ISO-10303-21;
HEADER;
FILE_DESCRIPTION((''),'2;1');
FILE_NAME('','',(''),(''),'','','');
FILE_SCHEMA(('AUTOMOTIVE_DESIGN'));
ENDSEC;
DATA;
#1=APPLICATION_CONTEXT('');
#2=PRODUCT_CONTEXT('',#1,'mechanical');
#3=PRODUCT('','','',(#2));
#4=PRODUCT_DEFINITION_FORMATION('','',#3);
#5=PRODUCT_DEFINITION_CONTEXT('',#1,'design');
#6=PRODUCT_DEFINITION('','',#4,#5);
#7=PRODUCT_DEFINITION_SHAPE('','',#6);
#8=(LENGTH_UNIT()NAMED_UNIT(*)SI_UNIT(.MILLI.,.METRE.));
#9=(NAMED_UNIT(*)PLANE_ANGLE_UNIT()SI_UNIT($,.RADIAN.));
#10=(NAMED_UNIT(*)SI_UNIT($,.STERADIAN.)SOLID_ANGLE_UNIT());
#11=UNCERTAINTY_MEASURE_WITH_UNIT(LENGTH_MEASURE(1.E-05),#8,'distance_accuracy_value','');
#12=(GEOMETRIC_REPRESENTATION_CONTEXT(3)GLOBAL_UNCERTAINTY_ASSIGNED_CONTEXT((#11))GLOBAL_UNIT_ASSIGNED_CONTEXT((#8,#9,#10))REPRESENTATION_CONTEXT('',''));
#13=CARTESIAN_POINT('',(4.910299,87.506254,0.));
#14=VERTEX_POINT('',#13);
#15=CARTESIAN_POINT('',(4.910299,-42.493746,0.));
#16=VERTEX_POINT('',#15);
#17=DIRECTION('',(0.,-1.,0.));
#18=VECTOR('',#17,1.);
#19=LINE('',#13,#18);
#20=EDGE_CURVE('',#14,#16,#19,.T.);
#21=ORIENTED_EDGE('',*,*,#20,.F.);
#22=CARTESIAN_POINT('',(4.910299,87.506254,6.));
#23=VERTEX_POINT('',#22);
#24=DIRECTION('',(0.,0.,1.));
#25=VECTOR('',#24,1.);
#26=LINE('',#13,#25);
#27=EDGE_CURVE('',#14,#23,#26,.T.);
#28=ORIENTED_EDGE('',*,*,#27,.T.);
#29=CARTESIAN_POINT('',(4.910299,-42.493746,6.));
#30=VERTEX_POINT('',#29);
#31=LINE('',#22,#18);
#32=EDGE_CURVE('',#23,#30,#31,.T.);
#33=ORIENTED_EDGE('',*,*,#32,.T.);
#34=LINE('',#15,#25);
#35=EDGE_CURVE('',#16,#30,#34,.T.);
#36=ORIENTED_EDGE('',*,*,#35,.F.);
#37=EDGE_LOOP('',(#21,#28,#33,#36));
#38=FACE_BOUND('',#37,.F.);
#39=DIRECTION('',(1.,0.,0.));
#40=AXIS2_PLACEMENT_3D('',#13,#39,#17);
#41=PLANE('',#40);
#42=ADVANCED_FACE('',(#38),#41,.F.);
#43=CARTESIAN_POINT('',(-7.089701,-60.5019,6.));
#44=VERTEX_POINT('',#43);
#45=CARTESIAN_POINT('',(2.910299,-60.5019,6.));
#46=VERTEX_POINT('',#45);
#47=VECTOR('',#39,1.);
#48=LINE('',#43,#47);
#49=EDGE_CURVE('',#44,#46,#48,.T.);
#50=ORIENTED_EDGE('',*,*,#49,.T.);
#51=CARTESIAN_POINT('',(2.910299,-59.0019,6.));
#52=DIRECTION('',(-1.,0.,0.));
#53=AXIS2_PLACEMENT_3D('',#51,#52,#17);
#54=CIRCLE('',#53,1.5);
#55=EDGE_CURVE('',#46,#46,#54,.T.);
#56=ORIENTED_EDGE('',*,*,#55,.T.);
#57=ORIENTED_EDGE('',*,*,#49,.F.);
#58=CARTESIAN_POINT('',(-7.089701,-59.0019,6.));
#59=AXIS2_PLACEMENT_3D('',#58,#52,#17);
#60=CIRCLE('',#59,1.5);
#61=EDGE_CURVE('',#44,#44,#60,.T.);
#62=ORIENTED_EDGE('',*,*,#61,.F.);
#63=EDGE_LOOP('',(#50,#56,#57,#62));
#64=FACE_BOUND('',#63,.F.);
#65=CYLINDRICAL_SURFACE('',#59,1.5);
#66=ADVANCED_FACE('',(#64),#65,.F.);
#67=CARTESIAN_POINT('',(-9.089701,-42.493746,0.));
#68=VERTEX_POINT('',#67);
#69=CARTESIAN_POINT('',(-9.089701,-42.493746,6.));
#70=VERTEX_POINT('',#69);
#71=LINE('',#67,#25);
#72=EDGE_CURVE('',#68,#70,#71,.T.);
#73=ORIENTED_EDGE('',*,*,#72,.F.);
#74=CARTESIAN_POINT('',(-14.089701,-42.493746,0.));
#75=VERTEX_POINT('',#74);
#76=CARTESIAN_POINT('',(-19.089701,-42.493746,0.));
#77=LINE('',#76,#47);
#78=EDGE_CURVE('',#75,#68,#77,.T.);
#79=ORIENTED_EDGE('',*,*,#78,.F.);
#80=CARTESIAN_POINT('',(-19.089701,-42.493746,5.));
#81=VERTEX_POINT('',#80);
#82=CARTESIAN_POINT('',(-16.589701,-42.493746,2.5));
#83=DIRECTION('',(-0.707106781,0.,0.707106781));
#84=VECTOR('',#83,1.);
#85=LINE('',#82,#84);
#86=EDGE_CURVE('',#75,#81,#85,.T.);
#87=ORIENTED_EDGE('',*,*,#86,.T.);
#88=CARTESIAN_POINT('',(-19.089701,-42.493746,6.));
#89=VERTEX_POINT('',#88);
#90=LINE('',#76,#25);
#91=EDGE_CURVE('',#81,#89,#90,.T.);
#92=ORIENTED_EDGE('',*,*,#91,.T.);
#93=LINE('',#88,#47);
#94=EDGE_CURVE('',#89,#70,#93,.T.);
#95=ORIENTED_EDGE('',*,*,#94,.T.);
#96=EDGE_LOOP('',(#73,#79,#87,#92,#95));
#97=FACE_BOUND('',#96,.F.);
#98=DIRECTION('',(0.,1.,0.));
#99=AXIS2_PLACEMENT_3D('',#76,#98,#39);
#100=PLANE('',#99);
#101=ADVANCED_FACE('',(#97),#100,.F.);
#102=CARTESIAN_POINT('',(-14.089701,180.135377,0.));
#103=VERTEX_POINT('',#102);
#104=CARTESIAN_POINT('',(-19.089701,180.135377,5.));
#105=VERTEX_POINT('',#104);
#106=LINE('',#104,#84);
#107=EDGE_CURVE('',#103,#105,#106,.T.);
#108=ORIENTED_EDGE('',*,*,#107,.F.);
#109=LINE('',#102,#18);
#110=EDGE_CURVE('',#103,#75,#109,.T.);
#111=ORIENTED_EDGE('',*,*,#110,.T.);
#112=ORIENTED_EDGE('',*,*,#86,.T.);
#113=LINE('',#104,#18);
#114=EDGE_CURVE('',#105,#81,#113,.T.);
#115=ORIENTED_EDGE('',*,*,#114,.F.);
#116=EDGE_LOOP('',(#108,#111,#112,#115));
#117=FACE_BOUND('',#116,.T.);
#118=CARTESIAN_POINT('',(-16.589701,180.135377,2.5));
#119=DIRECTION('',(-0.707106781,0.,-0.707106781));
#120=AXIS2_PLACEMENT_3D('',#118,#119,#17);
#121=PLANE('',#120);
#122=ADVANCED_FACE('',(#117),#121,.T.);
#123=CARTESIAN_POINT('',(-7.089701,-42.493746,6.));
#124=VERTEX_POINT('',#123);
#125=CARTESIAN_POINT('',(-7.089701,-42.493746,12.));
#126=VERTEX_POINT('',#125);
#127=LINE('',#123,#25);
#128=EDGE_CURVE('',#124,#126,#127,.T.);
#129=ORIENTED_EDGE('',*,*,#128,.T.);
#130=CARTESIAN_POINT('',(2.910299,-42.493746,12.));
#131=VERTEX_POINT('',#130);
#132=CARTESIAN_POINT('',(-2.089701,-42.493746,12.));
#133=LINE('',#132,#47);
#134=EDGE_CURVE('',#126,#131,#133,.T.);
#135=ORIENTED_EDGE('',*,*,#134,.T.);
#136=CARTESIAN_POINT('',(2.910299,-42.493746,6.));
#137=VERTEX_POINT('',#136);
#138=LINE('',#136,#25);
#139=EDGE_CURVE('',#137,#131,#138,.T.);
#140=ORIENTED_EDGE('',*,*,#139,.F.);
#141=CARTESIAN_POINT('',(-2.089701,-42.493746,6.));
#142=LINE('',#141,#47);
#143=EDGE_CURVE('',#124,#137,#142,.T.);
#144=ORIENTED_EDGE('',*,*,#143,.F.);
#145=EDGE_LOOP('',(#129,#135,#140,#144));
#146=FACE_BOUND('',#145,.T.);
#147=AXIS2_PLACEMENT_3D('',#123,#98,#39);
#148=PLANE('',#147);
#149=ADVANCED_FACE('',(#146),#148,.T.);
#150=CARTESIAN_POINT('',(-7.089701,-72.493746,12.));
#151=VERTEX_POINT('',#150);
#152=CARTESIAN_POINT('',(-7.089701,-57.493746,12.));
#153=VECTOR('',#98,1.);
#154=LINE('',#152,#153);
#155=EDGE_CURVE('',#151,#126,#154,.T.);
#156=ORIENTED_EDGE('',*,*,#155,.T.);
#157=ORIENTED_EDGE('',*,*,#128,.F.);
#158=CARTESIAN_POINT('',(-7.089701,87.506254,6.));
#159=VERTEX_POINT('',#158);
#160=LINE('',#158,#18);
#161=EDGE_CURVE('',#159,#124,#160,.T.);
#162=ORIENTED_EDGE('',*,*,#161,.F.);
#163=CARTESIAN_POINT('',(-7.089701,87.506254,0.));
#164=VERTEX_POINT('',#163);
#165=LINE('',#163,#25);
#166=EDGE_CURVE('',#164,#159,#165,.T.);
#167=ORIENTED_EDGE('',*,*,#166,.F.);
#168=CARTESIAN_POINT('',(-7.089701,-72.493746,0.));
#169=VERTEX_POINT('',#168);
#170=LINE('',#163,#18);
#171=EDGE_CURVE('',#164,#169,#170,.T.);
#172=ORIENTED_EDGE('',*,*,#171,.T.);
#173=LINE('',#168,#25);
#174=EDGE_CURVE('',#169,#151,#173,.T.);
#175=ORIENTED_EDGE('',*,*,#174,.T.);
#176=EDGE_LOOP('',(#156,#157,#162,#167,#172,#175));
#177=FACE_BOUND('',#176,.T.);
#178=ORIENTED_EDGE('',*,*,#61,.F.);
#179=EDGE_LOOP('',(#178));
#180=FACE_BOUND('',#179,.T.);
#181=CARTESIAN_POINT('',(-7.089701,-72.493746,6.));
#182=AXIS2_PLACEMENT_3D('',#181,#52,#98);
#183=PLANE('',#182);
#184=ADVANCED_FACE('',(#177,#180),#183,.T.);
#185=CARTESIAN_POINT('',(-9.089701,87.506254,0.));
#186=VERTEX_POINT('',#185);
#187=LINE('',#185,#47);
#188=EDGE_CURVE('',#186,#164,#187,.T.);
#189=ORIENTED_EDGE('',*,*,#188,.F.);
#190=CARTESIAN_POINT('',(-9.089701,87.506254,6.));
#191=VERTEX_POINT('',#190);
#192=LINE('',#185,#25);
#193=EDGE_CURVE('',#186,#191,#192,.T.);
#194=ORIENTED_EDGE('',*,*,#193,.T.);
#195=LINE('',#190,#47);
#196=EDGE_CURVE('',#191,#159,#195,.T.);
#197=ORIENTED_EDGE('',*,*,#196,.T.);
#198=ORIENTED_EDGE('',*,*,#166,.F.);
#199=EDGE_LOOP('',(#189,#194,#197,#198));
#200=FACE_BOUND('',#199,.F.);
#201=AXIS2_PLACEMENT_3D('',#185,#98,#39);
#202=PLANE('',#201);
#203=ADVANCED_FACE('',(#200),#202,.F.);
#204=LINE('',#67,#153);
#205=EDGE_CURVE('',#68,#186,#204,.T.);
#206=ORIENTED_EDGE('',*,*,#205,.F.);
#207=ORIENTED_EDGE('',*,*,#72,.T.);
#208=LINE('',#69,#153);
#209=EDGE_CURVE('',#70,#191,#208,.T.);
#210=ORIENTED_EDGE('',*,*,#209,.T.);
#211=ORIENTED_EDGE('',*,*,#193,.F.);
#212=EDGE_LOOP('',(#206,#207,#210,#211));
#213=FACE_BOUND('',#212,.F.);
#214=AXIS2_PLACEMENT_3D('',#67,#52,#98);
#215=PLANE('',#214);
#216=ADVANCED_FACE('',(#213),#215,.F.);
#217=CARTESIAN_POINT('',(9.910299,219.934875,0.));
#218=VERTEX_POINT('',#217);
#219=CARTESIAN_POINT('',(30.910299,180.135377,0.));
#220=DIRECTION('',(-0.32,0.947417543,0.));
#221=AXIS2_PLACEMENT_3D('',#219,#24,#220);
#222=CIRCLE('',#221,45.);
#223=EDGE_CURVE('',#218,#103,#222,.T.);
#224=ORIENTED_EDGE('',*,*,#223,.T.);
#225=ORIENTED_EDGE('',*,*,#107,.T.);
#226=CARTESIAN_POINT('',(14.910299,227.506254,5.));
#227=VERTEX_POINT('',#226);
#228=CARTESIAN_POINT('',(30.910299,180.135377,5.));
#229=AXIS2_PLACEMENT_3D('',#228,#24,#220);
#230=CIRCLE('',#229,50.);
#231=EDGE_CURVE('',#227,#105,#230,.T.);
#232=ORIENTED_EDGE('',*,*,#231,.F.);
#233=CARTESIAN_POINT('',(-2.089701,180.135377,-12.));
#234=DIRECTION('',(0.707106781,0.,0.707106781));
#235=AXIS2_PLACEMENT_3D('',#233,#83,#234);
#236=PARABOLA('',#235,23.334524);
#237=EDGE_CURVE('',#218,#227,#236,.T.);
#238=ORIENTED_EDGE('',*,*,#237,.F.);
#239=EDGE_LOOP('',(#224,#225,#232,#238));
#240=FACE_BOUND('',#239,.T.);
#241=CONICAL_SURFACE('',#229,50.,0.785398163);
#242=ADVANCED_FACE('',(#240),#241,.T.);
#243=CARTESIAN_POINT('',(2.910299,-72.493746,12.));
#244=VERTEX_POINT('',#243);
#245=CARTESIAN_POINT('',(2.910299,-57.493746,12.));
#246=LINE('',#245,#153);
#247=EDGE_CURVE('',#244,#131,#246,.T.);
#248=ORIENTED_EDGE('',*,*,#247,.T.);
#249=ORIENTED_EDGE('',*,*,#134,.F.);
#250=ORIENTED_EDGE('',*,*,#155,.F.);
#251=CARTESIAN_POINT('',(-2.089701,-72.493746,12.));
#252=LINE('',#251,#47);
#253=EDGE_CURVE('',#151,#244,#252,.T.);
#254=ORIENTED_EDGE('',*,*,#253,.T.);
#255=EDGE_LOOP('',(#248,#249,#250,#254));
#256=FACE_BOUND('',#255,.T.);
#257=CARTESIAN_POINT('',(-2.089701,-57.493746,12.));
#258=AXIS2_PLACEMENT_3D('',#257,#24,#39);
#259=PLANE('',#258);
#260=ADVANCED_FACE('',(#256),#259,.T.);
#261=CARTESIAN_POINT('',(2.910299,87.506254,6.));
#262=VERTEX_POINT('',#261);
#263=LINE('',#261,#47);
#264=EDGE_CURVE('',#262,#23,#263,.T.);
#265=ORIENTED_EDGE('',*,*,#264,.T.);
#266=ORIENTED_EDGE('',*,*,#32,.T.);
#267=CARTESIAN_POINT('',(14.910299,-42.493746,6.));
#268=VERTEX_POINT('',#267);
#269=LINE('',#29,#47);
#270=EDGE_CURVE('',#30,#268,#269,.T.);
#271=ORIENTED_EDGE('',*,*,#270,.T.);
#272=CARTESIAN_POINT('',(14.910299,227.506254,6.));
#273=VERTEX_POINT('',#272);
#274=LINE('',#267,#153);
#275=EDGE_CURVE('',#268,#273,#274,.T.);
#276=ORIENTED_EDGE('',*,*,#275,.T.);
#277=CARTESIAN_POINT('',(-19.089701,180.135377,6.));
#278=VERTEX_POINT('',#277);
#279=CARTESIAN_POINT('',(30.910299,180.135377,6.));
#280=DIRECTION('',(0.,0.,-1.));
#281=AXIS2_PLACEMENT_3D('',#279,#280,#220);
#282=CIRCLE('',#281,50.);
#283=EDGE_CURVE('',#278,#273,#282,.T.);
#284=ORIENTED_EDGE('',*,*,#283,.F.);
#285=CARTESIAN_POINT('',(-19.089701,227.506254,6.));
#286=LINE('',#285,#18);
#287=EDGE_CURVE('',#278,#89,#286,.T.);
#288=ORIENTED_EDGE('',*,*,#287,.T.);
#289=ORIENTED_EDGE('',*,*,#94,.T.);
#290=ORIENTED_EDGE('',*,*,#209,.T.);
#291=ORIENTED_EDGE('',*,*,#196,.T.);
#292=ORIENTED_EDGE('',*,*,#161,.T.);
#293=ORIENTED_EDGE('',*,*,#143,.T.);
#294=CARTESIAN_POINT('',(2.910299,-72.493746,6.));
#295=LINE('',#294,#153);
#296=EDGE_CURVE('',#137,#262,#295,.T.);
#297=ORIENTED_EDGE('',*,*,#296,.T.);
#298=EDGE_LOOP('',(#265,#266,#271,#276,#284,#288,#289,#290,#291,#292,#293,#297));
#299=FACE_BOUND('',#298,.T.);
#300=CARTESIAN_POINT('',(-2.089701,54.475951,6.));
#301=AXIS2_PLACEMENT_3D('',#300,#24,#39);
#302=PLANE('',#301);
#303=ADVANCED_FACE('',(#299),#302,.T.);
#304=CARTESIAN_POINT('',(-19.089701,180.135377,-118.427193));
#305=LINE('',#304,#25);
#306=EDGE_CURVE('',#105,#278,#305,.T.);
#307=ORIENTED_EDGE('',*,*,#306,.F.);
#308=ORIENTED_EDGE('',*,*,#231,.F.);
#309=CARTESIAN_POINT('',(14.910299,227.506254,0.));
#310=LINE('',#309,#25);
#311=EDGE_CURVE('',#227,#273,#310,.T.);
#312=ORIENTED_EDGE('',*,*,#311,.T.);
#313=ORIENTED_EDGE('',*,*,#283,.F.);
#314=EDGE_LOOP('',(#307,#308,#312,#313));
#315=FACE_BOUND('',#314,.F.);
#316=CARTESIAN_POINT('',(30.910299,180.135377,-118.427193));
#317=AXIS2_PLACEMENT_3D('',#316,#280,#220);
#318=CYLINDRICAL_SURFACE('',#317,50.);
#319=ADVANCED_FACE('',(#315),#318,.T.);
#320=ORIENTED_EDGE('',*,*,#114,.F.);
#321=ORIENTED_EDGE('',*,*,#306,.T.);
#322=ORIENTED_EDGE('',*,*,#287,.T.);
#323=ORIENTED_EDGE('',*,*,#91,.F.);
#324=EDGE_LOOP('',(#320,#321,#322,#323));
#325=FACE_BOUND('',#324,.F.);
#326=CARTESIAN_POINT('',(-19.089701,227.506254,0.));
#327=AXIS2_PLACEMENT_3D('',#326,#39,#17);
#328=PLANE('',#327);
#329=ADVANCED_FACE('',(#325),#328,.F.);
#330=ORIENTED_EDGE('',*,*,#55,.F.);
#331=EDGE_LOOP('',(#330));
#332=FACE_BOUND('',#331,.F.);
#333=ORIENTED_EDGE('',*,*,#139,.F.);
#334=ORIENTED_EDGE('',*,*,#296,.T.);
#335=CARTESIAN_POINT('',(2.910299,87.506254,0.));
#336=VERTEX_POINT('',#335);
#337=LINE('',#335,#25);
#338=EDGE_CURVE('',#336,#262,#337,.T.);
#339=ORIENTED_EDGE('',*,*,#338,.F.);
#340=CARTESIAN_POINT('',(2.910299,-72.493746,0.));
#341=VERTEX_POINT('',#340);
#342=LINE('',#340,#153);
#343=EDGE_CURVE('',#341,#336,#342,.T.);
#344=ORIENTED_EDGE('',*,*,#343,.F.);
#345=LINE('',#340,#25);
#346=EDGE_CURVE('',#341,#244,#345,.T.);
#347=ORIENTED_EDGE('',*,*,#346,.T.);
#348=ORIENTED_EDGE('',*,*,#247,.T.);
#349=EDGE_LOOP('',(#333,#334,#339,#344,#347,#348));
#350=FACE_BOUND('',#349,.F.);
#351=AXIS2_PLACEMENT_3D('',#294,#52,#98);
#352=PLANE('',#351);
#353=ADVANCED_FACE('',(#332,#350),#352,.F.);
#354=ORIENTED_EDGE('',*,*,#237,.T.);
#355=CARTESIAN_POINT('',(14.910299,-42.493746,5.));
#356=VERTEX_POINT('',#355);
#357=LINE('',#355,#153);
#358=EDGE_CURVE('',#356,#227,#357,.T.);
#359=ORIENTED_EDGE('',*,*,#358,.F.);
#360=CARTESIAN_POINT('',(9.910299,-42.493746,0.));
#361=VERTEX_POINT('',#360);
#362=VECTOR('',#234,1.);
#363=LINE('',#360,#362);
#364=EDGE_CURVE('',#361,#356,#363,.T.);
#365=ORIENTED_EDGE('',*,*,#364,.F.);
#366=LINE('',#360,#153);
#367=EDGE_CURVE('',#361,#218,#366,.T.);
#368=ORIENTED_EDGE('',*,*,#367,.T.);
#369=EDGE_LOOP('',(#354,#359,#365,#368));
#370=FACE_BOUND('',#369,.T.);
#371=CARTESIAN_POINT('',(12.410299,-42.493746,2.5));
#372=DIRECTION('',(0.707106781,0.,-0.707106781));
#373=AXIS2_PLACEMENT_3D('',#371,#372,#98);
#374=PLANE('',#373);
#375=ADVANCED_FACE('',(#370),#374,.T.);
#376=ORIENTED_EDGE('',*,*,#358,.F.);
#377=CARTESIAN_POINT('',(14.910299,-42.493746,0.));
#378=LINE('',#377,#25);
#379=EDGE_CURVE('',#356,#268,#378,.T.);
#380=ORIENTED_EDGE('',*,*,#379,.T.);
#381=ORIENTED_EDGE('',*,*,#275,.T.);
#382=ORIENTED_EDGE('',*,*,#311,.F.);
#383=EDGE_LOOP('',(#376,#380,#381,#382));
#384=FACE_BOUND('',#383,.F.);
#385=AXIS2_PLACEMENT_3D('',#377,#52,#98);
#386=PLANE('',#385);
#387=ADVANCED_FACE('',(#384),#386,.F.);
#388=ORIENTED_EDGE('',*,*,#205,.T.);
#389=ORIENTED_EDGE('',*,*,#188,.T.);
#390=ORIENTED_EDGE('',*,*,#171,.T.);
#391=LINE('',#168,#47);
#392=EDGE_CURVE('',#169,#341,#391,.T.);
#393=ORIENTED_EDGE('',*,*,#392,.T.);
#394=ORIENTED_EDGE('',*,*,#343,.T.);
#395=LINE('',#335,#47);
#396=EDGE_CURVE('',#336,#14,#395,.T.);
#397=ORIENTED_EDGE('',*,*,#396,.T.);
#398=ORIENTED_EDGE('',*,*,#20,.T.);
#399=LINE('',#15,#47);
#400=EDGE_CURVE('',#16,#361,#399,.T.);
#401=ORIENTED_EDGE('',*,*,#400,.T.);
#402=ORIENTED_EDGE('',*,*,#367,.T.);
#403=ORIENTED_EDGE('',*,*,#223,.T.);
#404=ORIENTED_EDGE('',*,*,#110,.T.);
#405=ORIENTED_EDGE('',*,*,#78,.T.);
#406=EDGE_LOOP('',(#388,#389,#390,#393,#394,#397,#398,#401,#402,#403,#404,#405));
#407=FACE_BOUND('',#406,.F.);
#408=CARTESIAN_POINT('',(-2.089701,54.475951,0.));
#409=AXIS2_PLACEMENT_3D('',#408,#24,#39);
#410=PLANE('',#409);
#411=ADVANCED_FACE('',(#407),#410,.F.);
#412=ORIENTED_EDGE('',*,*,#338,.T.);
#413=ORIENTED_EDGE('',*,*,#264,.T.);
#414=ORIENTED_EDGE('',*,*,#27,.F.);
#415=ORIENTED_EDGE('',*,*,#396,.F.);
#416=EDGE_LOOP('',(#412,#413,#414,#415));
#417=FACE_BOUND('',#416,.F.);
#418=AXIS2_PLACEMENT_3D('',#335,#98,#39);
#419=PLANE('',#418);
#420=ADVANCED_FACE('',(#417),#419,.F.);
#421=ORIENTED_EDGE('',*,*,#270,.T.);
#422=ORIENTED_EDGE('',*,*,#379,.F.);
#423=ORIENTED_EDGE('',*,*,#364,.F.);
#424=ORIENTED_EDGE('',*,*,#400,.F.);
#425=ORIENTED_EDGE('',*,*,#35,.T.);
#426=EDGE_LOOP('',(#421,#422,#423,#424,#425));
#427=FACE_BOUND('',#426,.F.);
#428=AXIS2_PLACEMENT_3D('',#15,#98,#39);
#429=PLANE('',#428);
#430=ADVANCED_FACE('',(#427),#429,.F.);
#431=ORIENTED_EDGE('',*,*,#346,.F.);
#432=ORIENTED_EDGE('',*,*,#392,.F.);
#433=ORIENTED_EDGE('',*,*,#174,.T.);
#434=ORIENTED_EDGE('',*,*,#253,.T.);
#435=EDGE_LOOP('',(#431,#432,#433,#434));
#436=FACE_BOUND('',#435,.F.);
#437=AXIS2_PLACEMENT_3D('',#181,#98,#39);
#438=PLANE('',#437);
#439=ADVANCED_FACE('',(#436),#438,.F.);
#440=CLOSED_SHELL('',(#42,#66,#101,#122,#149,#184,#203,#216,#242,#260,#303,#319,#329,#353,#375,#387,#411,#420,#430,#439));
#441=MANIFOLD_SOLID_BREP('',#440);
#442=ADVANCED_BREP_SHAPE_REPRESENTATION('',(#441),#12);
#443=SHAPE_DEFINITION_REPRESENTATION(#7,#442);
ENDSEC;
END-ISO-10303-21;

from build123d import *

# Parameters (mm, degrees)
F1_DEPTH    = 6
F2_T1_DEPTH = 242.8543856465
F3_W        = 10
F3_H        = 30
F4_DEPTH    = 6
F5_R        = 1.5
F6_DEPTH    = 10
F7_SIZE     = 5


# Not quite as in the source:
# - a fillet or chamfer that OpenCascade refuses, or shapes differently, is made with other operations: its cross-section is extruded or revolved along the edge and cut away or added


with BuildPart() as f1:
    # F0 (on Top) → F1 (new body)
    with BuildSketch(Plane.XY):
        Polygon((14.9102990106, 227.5062542017), (-19.0897009894, 227.5062542017), (-19.0897009894, -42.4937457983), (-9.0897009894, -42.4937457983), (-9.0897009894, 87.5062542017), (-7.0897009894, 87.5062542017), (-7.0897009894, -72.4937457983), (2.9102990106, -72.4937457983), (2.9102990106, 87.5062542017), (4.9102990106, 87.5062542017), (4.9102990106, -42.4937457983), (14.9102990106, -42.4937457983), align=None)
    extrude(amount=F1_DEPTH)

    # F2: fillet of radius 50 on 1 edges, made by hand

    # F2_s2 → F2_t1 (cut)
    with BuildSketch(Plane.XY.offset(-118.4271928233)):
        with BuildLine():
            ThreePointArc((14.9102990106, 227.5062542017), (-9.7098930126, 209.2901365467), (-19.0897009894, 180.1353770724))
            Line((-19.0897009894, 180.1353770724), (-19.0897009894, 227.5062542017))
            Line((-19.0897009894, 227.5062542017), (14.9102990106, 227.5062542017))
        make_face()
    extrude(amount=F2_T1_DEPTH, mode=Mode.SUBTRACT)

    # F3 (on face) → F4 (join)
    with BuildSketch(Plane.XY.offset(6)):
        with Locations((-2.0897009894, -57.4937457983)):
            Rectangle(F3_W, F3_H)
    extrude(amount=F4_DEPTH)

    # F5 (on face) → F6 (cut, through all)
    with BuildSketch(Plane(origin=(-7.0897009894, 0, 0), x_dir=(0, -1, 0), z_dir=(-1, 0, 0))):
        with Locations((59.0019002557, 6)):
            Circle(F5_R)
    extrude(amount=-F6_DEPTH, mode=Mode.SUBTRACT)

    # F7
    f7_edges = [f1.edges().sort_by_distance(p)[0] for p in [
        (14.910299, 92.506254, 0),
        (-19.089701, 68.820816, 0),
        (-9.709893, 209.290137, 0),
    ]]
    chamfer(f7_edges, length=F7_SIZE)


solid = f1.part
